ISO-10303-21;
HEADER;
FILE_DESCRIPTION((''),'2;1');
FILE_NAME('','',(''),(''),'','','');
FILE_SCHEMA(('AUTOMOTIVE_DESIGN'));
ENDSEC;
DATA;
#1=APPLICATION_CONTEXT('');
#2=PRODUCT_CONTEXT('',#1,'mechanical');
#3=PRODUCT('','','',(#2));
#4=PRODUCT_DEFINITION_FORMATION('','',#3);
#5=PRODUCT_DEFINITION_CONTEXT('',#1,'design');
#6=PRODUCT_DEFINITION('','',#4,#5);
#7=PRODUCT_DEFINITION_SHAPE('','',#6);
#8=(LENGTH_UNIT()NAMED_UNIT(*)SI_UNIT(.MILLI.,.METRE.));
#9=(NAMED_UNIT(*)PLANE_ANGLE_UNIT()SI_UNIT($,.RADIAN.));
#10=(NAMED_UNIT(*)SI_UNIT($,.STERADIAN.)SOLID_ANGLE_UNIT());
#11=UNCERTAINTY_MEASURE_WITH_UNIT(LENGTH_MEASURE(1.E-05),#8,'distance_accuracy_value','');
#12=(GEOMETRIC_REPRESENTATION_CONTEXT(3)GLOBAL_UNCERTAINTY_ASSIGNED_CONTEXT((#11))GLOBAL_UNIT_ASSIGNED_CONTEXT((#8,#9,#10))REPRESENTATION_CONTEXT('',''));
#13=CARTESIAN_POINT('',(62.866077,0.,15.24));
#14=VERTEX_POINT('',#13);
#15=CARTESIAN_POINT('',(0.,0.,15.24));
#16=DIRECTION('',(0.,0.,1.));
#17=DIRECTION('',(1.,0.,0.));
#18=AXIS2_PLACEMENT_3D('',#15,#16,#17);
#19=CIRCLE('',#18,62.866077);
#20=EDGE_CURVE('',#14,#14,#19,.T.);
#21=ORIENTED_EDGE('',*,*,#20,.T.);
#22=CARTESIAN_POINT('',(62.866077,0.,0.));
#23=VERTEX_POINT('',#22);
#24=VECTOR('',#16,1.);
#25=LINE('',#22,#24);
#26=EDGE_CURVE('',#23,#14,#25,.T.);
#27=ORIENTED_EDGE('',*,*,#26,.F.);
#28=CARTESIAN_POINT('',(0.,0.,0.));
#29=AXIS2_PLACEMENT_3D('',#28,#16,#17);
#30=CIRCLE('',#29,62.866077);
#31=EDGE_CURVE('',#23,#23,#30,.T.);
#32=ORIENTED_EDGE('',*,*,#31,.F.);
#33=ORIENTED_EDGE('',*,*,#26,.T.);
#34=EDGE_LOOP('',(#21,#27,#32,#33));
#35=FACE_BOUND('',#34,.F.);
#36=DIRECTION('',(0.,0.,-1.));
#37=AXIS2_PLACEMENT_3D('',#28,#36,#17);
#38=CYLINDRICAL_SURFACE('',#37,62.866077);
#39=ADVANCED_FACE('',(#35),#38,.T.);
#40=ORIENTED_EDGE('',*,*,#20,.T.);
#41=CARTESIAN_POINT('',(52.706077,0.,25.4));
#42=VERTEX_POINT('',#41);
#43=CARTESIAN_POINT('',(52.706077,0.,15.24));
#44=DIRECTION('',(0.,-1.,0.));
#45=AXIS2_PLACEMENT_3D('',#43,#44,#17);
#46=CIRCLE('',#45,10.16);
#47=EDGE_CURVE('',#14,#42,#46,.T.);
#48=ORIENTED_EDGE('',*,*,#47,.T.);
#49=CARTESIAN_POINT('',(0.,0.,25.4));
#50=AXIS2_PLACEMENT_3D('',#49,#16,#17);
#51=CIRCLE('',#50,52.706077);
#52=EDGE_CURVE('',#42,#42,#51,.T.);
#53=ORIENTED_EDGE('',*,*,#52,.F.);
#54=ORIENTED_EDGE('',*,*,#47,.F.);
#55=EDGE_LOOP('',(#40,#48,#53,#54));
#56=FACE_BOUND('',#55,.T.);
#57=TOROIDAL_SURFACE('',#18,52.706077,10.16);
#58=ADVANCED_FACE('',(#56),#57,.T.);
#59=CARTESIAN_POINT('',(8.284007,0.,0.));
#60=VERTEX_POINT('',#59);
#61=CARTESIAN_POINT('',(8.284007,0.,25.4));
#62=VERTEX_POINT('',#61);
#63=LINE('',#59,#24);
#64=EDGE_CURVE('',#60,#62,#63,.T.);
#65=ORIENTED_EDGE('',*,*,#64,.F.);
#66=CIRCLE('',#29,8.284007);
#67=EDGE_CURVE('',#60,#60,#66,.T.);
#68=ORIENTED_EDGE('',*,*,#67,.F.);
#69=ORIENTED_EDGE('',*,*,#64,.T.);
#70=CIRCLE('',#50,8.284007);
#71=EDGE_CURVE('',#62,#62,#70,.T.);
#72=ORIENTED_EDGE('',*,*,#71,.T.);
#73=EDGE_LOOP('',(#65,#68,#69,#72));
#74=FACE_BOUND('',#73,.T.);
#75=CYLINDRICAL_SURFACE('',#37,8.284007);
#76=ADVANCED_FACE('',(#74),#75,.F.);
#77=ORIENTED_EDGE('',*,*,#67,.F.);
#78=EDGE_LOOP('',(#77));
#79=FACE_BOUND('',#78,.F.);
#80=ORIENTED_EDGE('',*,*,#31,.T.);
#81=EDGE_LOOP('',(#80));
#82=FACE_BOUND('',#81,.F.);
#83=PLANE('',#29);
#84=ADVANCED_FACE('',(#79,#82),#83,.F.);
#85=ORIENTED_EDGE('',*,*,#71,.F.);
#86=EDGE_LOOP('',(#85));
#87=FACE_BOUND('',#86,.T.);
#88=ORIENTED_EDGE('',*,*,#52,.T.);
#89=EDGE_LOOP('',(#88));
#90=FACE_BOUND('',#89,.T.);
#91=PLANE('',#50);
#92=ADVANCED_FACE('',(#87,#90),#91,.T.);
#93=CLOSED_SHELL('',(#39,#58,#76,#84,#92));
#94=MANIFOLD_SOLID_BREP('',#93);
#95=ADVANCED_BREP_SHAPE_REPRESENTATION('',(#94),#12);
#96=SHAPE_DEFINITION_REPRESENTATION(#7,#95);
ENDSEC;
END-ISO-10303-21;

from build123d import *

# Parameters (mm, degrees)
F0_R     = 62.8660766499
F0_R_2   = 8.2840068325
F1_DEPTH = 25.4
F3_R     = 10.16


# Not quite as in the source:
# - the program builds the solid bodies; features that only make, move or delete a surface that nothing else refers to are left out


with BuildPart() as f1:
    # F0 (on Top) → F1 (new body)
    with BuildSketch(Plane.XY):
        Circle(F0_R)
        Circle(F0_R_2, mode=Mode.SUBTRACT)
    extrude(amount=F1_DEPTH)

    # F3
    f3_edges = [f1.edges().sort_by_distance(p)[0] for p in [
        (-62.866077, 0, 25.4),
    ]]
    fillet(f3_edges, radius=F3_R)


solid = f1.part
